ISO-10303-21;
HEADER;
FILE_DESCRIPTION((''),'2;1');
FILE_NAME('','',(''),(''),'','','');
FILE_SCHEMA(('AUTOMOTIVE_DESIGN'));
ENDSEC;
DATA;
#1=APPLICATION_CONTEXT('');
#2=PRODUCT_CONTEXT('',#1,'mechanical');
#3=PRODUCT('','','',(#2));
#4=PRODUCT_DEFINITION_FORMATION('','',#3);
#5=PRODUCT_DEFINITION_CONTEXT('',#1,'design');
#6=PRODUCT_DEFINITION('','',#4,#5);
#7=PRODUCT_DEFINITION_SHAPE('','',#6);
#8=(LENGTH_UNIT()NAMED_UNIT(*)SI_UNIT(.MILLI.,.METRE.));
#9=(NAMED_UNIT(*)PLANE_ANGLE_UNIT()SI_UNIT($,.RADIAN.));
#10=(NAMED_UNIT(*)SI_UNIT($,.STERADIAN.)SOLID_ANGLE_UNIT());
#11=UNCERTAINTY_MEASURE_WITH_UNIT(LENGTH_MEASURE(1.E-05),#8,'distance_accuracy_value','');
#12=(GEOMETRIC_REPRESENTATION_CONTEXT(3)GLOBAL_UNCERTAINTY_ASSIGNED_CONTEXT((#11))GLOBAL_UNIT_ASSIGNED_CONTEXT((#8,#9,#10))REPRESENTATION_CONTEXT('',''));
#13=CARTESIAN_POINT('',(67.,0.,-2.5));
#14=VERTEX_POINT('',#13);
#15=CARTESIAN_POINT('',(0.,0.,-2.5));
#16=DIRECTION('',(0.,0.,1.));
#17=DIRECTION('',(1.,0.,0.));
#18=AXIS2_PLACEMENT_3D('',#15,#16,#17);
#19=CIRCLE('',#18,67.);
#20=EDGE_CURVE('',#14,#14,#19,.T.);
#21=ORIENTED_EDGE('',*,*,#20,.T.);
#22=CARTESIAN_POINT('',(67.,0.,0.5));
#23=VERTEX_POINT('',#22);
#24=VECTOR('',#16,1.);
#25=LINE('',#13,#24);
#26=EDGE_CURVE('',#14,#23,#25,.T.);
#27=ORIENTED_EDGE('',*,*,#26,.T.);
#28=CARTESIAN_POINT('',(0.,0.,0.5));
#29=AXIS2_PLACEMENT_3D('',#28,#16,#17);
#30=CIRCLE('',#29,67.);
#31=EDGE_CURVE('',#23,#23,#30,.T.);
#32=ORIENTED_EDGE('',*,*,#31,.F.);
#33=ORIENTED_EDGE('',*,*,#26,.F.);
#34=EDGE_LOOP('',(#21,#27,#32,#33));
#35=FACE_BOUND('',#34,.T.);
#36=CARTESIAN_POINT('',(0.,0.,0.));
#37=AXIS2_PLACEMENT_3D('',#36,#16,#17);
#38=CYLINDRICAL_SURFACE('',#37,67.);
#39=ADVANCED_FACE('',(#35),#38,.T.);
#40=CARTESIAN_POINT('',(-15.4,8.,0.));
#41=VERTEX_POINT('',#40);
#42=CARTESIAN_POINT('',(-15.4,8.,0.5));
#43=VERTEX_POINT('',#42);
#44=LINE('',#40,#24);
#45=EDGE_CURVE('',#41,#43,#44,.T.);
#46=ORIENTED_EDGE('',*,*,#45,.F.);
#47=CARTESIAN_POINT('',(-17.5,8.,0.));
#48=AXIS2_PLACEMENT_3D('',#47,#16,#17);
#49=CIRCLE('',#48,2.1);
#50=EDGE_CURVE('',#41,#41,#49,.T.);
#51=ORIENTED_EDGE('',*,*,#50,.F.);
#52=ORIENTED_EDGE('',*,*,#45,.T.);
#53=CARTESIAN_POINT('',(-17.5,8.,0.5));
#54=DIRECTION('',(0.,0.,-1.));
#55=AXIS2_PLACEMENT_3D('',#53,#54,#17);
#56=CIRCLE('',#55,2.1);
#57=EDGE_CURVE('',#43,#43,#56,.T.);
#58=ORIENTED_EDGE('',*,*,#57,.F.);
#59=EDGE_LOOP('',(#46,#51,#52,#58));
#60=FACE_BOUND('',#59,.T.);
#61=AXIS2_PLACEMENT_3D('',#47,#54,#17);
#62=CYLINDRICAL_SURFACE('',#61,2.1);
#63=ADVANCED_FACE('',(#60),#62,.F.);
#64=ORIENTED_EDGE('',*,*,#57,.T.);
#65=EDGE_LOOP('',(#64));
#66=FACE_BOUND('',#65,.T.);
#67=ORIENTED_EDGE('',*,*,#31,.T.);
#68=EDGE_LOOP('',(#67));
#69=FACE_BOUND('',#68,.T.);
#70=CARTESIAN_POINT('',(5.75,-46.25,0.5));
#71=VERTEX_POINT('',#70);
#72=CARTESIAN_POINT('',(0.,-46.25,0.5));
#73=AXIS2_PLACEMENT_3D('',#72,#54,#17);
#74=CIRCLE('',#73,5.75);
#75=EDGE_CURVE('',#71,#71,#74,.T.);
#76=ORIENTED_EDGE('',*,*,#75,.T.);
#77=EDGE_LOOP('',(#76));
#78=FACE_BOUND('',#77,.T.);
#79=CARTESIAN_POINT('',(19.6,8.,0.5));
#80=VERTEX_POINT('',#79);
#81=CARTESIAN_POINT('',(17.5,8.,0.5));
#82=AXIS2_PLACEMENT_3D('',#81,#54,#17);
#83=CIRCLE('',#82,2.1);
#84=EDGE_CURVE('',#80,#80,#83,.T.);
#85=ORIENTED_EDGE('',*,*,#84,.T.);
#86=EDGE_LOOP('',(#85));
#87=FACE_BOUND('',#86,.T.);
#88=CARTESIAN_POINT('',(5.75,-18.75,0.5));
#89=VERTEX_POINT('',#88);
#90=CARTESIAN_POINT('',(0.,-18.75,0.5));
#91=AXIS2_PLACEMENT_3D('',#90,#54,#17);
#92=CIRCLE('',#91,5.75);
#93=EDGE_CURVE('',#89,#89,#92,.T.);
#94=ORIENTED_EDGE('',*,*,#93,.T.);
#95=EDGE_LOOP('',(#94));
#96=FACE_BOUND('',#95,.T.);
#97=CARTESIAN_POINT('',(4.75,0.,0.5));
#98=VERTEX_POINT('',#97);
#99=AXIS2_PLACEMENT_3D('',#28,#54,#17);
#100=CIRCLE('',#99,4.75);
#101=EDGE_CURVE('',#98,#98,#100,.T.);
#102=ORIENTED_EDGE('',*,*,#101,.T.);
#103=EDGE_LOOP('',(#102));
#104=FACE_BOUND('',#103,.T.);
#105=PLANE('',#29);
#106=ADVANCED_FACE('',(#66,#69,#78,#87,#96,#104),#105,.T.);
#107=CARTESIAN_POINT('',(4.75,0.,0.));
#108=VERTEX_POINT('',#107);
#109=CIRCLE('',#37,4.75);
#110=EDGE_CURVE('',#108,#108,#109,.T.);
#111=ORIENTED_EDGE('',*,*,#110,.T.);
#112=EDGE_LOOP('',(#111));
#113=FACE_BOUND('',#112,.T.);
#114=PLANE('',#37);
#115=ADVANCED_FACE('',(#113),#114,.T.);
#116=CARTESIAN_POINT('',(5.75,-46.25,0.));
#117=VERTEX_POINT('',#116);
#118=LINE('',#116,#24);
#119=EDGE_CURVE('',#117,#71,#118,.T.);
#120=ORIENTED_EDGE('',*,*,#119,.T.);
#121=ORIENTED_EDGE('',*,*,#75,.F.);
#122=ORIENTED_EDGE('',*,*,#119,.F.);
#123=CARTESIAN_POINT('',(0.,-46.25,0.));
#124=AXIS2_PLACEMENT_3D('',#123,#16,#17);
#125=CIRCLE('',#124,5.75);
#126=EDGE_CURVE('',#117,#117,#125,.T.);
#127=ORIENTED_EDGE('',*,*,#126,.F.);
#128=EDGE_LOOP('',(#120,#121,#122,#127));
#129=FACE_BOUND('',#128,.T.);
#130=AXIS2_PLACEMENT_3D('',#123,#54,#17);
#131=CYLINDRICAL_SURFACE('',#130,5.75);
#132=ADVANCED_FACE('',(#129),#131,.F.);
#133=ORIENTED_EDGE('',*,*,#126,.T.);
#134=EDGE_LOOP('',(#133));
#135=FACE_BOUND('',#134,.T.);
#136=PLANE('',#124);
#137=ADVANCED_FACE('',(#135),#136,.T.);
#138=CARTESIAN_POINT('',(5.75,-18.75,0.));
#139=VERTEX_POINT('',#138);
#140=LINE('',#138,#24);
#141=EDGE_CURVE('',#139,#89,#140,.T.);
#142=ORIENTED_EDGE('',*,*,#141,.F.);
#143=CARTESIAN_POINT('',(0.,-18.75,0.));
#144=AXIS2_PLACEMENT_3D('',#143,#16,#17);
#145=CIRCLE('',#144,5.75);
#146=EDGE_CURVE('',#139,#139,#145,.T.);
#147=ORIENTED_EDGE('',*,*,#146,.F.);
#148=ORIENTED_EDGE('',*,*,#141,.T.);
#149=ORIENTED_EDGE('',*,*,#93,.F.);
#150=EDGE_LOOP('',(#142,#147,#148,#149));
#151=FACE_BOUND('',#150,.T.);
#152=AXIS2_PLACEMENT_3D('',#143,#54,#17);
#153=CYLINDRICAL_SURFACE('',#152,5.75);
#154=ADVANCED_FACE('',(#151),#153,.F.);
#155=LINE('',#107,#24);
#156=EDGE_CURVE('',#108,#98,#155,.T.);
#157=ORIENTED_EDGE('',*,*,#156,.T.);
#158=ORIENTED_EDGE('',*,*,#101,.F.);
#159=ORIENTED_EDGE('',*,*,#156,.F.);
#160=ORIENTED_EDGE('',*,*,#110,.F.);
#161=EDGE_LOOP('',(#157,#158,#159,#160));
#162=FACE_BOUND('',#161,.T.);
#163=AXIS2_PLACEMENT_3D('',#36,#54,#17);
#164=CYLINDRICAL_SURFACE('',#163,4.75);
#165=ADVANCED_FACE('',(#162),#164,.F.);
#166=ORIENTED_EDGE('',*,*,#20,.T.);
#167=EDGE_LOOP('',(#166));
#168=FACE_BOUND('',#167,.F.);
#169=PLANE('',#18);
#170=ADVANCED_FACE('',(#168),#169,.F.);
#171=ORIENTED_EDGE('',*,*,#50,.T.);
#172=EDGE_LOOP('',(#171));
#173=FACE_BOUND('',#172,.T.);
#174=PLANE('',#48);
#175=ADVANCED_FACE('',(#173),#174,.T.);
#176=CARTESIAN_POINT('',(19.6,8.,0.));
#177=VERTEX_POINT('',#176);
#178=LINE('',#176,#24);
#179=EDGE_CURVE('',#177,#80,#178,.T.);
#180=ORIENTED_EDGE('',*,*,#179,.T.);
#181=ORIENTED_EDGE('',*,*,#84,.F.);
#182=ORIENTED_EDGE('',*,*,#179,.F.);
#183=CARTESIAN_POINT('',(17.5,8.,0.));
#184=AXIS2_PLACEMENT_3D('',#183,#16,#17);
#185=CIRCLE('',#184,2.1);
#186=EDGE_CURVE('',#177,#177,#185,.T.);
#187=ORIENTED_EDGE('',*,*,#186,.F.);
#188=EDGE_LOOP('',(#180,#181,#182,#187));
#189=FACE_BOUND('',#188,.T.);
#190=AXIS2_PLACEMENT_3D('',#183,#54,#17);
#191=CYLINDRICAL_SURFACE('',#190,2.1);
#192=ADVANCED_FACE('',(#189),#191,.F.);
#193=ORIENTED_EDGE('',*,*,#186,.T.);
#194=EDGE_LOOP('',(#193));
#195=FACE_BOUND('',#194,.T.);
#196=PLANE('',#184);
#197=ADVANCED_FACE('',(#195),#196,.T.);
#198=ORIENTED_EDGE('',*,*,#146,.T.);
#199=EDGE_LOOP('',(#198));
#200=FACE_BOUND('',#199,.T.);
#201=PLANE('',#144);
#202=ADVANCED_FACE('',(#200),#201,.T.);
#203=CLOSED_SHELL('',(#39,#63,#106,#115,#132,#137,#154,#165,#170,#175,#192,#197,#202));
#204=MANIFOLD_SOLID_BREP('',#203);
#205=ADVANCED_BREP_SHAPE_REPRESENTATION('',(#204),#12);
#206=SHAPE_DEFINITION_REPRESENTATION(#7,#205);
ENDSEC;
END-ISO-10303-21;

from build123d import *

# Parameters (mm, degrees)
F0_R     = 67
F1_DEPTH = 2.5
F4_DEPTH = 2
F6_R     = 2.1
F5_R     = 4.75
F5_R_2   = 5.75
F7_DEPTH = 0.501


# Not quite as in the source:
# - the program builds the solid bodies; features that only make, move or delete a surface that nothing else refers to are left out


with BuildPart() as f1:
    # F0 (on Top) → F1 (new body, symmetric)
    with BuildSketch(Plane.XY):
        Circle(F0_R)
    extrude(amount=F1_DEPTH, both=True)

    # F4 (cut): a face of the model
    f4_faces = [f1.faces().sort_by_distance(p)[0] for p in [
        (0, 0, 2.5),
    ]]
    extrude(f4_faces, amount=-F4_DEPTH, mode=Mode.SUBTRACT)

    # F6 (on Top) + F5 (on Top) → F7 (cut, through all)
    with BuildSketch(Plane.XY):
        with Locations((17.5, 8)):
            Circle(F6_R)
        with Locations((-17.5, 8)):
            Circle(F6_R)
    with BuildSketch(Plane.XY):
        Circle(F5_R)
        with Locations((0, -18.75)):
            Circle(F5_R_2)
        with Locations((0, -46.25)):
            Circle(F5_R_2)
    extrude(amount=F7_DEPTH, mode=Mode.SUBTRACT)


solid = f1.part
